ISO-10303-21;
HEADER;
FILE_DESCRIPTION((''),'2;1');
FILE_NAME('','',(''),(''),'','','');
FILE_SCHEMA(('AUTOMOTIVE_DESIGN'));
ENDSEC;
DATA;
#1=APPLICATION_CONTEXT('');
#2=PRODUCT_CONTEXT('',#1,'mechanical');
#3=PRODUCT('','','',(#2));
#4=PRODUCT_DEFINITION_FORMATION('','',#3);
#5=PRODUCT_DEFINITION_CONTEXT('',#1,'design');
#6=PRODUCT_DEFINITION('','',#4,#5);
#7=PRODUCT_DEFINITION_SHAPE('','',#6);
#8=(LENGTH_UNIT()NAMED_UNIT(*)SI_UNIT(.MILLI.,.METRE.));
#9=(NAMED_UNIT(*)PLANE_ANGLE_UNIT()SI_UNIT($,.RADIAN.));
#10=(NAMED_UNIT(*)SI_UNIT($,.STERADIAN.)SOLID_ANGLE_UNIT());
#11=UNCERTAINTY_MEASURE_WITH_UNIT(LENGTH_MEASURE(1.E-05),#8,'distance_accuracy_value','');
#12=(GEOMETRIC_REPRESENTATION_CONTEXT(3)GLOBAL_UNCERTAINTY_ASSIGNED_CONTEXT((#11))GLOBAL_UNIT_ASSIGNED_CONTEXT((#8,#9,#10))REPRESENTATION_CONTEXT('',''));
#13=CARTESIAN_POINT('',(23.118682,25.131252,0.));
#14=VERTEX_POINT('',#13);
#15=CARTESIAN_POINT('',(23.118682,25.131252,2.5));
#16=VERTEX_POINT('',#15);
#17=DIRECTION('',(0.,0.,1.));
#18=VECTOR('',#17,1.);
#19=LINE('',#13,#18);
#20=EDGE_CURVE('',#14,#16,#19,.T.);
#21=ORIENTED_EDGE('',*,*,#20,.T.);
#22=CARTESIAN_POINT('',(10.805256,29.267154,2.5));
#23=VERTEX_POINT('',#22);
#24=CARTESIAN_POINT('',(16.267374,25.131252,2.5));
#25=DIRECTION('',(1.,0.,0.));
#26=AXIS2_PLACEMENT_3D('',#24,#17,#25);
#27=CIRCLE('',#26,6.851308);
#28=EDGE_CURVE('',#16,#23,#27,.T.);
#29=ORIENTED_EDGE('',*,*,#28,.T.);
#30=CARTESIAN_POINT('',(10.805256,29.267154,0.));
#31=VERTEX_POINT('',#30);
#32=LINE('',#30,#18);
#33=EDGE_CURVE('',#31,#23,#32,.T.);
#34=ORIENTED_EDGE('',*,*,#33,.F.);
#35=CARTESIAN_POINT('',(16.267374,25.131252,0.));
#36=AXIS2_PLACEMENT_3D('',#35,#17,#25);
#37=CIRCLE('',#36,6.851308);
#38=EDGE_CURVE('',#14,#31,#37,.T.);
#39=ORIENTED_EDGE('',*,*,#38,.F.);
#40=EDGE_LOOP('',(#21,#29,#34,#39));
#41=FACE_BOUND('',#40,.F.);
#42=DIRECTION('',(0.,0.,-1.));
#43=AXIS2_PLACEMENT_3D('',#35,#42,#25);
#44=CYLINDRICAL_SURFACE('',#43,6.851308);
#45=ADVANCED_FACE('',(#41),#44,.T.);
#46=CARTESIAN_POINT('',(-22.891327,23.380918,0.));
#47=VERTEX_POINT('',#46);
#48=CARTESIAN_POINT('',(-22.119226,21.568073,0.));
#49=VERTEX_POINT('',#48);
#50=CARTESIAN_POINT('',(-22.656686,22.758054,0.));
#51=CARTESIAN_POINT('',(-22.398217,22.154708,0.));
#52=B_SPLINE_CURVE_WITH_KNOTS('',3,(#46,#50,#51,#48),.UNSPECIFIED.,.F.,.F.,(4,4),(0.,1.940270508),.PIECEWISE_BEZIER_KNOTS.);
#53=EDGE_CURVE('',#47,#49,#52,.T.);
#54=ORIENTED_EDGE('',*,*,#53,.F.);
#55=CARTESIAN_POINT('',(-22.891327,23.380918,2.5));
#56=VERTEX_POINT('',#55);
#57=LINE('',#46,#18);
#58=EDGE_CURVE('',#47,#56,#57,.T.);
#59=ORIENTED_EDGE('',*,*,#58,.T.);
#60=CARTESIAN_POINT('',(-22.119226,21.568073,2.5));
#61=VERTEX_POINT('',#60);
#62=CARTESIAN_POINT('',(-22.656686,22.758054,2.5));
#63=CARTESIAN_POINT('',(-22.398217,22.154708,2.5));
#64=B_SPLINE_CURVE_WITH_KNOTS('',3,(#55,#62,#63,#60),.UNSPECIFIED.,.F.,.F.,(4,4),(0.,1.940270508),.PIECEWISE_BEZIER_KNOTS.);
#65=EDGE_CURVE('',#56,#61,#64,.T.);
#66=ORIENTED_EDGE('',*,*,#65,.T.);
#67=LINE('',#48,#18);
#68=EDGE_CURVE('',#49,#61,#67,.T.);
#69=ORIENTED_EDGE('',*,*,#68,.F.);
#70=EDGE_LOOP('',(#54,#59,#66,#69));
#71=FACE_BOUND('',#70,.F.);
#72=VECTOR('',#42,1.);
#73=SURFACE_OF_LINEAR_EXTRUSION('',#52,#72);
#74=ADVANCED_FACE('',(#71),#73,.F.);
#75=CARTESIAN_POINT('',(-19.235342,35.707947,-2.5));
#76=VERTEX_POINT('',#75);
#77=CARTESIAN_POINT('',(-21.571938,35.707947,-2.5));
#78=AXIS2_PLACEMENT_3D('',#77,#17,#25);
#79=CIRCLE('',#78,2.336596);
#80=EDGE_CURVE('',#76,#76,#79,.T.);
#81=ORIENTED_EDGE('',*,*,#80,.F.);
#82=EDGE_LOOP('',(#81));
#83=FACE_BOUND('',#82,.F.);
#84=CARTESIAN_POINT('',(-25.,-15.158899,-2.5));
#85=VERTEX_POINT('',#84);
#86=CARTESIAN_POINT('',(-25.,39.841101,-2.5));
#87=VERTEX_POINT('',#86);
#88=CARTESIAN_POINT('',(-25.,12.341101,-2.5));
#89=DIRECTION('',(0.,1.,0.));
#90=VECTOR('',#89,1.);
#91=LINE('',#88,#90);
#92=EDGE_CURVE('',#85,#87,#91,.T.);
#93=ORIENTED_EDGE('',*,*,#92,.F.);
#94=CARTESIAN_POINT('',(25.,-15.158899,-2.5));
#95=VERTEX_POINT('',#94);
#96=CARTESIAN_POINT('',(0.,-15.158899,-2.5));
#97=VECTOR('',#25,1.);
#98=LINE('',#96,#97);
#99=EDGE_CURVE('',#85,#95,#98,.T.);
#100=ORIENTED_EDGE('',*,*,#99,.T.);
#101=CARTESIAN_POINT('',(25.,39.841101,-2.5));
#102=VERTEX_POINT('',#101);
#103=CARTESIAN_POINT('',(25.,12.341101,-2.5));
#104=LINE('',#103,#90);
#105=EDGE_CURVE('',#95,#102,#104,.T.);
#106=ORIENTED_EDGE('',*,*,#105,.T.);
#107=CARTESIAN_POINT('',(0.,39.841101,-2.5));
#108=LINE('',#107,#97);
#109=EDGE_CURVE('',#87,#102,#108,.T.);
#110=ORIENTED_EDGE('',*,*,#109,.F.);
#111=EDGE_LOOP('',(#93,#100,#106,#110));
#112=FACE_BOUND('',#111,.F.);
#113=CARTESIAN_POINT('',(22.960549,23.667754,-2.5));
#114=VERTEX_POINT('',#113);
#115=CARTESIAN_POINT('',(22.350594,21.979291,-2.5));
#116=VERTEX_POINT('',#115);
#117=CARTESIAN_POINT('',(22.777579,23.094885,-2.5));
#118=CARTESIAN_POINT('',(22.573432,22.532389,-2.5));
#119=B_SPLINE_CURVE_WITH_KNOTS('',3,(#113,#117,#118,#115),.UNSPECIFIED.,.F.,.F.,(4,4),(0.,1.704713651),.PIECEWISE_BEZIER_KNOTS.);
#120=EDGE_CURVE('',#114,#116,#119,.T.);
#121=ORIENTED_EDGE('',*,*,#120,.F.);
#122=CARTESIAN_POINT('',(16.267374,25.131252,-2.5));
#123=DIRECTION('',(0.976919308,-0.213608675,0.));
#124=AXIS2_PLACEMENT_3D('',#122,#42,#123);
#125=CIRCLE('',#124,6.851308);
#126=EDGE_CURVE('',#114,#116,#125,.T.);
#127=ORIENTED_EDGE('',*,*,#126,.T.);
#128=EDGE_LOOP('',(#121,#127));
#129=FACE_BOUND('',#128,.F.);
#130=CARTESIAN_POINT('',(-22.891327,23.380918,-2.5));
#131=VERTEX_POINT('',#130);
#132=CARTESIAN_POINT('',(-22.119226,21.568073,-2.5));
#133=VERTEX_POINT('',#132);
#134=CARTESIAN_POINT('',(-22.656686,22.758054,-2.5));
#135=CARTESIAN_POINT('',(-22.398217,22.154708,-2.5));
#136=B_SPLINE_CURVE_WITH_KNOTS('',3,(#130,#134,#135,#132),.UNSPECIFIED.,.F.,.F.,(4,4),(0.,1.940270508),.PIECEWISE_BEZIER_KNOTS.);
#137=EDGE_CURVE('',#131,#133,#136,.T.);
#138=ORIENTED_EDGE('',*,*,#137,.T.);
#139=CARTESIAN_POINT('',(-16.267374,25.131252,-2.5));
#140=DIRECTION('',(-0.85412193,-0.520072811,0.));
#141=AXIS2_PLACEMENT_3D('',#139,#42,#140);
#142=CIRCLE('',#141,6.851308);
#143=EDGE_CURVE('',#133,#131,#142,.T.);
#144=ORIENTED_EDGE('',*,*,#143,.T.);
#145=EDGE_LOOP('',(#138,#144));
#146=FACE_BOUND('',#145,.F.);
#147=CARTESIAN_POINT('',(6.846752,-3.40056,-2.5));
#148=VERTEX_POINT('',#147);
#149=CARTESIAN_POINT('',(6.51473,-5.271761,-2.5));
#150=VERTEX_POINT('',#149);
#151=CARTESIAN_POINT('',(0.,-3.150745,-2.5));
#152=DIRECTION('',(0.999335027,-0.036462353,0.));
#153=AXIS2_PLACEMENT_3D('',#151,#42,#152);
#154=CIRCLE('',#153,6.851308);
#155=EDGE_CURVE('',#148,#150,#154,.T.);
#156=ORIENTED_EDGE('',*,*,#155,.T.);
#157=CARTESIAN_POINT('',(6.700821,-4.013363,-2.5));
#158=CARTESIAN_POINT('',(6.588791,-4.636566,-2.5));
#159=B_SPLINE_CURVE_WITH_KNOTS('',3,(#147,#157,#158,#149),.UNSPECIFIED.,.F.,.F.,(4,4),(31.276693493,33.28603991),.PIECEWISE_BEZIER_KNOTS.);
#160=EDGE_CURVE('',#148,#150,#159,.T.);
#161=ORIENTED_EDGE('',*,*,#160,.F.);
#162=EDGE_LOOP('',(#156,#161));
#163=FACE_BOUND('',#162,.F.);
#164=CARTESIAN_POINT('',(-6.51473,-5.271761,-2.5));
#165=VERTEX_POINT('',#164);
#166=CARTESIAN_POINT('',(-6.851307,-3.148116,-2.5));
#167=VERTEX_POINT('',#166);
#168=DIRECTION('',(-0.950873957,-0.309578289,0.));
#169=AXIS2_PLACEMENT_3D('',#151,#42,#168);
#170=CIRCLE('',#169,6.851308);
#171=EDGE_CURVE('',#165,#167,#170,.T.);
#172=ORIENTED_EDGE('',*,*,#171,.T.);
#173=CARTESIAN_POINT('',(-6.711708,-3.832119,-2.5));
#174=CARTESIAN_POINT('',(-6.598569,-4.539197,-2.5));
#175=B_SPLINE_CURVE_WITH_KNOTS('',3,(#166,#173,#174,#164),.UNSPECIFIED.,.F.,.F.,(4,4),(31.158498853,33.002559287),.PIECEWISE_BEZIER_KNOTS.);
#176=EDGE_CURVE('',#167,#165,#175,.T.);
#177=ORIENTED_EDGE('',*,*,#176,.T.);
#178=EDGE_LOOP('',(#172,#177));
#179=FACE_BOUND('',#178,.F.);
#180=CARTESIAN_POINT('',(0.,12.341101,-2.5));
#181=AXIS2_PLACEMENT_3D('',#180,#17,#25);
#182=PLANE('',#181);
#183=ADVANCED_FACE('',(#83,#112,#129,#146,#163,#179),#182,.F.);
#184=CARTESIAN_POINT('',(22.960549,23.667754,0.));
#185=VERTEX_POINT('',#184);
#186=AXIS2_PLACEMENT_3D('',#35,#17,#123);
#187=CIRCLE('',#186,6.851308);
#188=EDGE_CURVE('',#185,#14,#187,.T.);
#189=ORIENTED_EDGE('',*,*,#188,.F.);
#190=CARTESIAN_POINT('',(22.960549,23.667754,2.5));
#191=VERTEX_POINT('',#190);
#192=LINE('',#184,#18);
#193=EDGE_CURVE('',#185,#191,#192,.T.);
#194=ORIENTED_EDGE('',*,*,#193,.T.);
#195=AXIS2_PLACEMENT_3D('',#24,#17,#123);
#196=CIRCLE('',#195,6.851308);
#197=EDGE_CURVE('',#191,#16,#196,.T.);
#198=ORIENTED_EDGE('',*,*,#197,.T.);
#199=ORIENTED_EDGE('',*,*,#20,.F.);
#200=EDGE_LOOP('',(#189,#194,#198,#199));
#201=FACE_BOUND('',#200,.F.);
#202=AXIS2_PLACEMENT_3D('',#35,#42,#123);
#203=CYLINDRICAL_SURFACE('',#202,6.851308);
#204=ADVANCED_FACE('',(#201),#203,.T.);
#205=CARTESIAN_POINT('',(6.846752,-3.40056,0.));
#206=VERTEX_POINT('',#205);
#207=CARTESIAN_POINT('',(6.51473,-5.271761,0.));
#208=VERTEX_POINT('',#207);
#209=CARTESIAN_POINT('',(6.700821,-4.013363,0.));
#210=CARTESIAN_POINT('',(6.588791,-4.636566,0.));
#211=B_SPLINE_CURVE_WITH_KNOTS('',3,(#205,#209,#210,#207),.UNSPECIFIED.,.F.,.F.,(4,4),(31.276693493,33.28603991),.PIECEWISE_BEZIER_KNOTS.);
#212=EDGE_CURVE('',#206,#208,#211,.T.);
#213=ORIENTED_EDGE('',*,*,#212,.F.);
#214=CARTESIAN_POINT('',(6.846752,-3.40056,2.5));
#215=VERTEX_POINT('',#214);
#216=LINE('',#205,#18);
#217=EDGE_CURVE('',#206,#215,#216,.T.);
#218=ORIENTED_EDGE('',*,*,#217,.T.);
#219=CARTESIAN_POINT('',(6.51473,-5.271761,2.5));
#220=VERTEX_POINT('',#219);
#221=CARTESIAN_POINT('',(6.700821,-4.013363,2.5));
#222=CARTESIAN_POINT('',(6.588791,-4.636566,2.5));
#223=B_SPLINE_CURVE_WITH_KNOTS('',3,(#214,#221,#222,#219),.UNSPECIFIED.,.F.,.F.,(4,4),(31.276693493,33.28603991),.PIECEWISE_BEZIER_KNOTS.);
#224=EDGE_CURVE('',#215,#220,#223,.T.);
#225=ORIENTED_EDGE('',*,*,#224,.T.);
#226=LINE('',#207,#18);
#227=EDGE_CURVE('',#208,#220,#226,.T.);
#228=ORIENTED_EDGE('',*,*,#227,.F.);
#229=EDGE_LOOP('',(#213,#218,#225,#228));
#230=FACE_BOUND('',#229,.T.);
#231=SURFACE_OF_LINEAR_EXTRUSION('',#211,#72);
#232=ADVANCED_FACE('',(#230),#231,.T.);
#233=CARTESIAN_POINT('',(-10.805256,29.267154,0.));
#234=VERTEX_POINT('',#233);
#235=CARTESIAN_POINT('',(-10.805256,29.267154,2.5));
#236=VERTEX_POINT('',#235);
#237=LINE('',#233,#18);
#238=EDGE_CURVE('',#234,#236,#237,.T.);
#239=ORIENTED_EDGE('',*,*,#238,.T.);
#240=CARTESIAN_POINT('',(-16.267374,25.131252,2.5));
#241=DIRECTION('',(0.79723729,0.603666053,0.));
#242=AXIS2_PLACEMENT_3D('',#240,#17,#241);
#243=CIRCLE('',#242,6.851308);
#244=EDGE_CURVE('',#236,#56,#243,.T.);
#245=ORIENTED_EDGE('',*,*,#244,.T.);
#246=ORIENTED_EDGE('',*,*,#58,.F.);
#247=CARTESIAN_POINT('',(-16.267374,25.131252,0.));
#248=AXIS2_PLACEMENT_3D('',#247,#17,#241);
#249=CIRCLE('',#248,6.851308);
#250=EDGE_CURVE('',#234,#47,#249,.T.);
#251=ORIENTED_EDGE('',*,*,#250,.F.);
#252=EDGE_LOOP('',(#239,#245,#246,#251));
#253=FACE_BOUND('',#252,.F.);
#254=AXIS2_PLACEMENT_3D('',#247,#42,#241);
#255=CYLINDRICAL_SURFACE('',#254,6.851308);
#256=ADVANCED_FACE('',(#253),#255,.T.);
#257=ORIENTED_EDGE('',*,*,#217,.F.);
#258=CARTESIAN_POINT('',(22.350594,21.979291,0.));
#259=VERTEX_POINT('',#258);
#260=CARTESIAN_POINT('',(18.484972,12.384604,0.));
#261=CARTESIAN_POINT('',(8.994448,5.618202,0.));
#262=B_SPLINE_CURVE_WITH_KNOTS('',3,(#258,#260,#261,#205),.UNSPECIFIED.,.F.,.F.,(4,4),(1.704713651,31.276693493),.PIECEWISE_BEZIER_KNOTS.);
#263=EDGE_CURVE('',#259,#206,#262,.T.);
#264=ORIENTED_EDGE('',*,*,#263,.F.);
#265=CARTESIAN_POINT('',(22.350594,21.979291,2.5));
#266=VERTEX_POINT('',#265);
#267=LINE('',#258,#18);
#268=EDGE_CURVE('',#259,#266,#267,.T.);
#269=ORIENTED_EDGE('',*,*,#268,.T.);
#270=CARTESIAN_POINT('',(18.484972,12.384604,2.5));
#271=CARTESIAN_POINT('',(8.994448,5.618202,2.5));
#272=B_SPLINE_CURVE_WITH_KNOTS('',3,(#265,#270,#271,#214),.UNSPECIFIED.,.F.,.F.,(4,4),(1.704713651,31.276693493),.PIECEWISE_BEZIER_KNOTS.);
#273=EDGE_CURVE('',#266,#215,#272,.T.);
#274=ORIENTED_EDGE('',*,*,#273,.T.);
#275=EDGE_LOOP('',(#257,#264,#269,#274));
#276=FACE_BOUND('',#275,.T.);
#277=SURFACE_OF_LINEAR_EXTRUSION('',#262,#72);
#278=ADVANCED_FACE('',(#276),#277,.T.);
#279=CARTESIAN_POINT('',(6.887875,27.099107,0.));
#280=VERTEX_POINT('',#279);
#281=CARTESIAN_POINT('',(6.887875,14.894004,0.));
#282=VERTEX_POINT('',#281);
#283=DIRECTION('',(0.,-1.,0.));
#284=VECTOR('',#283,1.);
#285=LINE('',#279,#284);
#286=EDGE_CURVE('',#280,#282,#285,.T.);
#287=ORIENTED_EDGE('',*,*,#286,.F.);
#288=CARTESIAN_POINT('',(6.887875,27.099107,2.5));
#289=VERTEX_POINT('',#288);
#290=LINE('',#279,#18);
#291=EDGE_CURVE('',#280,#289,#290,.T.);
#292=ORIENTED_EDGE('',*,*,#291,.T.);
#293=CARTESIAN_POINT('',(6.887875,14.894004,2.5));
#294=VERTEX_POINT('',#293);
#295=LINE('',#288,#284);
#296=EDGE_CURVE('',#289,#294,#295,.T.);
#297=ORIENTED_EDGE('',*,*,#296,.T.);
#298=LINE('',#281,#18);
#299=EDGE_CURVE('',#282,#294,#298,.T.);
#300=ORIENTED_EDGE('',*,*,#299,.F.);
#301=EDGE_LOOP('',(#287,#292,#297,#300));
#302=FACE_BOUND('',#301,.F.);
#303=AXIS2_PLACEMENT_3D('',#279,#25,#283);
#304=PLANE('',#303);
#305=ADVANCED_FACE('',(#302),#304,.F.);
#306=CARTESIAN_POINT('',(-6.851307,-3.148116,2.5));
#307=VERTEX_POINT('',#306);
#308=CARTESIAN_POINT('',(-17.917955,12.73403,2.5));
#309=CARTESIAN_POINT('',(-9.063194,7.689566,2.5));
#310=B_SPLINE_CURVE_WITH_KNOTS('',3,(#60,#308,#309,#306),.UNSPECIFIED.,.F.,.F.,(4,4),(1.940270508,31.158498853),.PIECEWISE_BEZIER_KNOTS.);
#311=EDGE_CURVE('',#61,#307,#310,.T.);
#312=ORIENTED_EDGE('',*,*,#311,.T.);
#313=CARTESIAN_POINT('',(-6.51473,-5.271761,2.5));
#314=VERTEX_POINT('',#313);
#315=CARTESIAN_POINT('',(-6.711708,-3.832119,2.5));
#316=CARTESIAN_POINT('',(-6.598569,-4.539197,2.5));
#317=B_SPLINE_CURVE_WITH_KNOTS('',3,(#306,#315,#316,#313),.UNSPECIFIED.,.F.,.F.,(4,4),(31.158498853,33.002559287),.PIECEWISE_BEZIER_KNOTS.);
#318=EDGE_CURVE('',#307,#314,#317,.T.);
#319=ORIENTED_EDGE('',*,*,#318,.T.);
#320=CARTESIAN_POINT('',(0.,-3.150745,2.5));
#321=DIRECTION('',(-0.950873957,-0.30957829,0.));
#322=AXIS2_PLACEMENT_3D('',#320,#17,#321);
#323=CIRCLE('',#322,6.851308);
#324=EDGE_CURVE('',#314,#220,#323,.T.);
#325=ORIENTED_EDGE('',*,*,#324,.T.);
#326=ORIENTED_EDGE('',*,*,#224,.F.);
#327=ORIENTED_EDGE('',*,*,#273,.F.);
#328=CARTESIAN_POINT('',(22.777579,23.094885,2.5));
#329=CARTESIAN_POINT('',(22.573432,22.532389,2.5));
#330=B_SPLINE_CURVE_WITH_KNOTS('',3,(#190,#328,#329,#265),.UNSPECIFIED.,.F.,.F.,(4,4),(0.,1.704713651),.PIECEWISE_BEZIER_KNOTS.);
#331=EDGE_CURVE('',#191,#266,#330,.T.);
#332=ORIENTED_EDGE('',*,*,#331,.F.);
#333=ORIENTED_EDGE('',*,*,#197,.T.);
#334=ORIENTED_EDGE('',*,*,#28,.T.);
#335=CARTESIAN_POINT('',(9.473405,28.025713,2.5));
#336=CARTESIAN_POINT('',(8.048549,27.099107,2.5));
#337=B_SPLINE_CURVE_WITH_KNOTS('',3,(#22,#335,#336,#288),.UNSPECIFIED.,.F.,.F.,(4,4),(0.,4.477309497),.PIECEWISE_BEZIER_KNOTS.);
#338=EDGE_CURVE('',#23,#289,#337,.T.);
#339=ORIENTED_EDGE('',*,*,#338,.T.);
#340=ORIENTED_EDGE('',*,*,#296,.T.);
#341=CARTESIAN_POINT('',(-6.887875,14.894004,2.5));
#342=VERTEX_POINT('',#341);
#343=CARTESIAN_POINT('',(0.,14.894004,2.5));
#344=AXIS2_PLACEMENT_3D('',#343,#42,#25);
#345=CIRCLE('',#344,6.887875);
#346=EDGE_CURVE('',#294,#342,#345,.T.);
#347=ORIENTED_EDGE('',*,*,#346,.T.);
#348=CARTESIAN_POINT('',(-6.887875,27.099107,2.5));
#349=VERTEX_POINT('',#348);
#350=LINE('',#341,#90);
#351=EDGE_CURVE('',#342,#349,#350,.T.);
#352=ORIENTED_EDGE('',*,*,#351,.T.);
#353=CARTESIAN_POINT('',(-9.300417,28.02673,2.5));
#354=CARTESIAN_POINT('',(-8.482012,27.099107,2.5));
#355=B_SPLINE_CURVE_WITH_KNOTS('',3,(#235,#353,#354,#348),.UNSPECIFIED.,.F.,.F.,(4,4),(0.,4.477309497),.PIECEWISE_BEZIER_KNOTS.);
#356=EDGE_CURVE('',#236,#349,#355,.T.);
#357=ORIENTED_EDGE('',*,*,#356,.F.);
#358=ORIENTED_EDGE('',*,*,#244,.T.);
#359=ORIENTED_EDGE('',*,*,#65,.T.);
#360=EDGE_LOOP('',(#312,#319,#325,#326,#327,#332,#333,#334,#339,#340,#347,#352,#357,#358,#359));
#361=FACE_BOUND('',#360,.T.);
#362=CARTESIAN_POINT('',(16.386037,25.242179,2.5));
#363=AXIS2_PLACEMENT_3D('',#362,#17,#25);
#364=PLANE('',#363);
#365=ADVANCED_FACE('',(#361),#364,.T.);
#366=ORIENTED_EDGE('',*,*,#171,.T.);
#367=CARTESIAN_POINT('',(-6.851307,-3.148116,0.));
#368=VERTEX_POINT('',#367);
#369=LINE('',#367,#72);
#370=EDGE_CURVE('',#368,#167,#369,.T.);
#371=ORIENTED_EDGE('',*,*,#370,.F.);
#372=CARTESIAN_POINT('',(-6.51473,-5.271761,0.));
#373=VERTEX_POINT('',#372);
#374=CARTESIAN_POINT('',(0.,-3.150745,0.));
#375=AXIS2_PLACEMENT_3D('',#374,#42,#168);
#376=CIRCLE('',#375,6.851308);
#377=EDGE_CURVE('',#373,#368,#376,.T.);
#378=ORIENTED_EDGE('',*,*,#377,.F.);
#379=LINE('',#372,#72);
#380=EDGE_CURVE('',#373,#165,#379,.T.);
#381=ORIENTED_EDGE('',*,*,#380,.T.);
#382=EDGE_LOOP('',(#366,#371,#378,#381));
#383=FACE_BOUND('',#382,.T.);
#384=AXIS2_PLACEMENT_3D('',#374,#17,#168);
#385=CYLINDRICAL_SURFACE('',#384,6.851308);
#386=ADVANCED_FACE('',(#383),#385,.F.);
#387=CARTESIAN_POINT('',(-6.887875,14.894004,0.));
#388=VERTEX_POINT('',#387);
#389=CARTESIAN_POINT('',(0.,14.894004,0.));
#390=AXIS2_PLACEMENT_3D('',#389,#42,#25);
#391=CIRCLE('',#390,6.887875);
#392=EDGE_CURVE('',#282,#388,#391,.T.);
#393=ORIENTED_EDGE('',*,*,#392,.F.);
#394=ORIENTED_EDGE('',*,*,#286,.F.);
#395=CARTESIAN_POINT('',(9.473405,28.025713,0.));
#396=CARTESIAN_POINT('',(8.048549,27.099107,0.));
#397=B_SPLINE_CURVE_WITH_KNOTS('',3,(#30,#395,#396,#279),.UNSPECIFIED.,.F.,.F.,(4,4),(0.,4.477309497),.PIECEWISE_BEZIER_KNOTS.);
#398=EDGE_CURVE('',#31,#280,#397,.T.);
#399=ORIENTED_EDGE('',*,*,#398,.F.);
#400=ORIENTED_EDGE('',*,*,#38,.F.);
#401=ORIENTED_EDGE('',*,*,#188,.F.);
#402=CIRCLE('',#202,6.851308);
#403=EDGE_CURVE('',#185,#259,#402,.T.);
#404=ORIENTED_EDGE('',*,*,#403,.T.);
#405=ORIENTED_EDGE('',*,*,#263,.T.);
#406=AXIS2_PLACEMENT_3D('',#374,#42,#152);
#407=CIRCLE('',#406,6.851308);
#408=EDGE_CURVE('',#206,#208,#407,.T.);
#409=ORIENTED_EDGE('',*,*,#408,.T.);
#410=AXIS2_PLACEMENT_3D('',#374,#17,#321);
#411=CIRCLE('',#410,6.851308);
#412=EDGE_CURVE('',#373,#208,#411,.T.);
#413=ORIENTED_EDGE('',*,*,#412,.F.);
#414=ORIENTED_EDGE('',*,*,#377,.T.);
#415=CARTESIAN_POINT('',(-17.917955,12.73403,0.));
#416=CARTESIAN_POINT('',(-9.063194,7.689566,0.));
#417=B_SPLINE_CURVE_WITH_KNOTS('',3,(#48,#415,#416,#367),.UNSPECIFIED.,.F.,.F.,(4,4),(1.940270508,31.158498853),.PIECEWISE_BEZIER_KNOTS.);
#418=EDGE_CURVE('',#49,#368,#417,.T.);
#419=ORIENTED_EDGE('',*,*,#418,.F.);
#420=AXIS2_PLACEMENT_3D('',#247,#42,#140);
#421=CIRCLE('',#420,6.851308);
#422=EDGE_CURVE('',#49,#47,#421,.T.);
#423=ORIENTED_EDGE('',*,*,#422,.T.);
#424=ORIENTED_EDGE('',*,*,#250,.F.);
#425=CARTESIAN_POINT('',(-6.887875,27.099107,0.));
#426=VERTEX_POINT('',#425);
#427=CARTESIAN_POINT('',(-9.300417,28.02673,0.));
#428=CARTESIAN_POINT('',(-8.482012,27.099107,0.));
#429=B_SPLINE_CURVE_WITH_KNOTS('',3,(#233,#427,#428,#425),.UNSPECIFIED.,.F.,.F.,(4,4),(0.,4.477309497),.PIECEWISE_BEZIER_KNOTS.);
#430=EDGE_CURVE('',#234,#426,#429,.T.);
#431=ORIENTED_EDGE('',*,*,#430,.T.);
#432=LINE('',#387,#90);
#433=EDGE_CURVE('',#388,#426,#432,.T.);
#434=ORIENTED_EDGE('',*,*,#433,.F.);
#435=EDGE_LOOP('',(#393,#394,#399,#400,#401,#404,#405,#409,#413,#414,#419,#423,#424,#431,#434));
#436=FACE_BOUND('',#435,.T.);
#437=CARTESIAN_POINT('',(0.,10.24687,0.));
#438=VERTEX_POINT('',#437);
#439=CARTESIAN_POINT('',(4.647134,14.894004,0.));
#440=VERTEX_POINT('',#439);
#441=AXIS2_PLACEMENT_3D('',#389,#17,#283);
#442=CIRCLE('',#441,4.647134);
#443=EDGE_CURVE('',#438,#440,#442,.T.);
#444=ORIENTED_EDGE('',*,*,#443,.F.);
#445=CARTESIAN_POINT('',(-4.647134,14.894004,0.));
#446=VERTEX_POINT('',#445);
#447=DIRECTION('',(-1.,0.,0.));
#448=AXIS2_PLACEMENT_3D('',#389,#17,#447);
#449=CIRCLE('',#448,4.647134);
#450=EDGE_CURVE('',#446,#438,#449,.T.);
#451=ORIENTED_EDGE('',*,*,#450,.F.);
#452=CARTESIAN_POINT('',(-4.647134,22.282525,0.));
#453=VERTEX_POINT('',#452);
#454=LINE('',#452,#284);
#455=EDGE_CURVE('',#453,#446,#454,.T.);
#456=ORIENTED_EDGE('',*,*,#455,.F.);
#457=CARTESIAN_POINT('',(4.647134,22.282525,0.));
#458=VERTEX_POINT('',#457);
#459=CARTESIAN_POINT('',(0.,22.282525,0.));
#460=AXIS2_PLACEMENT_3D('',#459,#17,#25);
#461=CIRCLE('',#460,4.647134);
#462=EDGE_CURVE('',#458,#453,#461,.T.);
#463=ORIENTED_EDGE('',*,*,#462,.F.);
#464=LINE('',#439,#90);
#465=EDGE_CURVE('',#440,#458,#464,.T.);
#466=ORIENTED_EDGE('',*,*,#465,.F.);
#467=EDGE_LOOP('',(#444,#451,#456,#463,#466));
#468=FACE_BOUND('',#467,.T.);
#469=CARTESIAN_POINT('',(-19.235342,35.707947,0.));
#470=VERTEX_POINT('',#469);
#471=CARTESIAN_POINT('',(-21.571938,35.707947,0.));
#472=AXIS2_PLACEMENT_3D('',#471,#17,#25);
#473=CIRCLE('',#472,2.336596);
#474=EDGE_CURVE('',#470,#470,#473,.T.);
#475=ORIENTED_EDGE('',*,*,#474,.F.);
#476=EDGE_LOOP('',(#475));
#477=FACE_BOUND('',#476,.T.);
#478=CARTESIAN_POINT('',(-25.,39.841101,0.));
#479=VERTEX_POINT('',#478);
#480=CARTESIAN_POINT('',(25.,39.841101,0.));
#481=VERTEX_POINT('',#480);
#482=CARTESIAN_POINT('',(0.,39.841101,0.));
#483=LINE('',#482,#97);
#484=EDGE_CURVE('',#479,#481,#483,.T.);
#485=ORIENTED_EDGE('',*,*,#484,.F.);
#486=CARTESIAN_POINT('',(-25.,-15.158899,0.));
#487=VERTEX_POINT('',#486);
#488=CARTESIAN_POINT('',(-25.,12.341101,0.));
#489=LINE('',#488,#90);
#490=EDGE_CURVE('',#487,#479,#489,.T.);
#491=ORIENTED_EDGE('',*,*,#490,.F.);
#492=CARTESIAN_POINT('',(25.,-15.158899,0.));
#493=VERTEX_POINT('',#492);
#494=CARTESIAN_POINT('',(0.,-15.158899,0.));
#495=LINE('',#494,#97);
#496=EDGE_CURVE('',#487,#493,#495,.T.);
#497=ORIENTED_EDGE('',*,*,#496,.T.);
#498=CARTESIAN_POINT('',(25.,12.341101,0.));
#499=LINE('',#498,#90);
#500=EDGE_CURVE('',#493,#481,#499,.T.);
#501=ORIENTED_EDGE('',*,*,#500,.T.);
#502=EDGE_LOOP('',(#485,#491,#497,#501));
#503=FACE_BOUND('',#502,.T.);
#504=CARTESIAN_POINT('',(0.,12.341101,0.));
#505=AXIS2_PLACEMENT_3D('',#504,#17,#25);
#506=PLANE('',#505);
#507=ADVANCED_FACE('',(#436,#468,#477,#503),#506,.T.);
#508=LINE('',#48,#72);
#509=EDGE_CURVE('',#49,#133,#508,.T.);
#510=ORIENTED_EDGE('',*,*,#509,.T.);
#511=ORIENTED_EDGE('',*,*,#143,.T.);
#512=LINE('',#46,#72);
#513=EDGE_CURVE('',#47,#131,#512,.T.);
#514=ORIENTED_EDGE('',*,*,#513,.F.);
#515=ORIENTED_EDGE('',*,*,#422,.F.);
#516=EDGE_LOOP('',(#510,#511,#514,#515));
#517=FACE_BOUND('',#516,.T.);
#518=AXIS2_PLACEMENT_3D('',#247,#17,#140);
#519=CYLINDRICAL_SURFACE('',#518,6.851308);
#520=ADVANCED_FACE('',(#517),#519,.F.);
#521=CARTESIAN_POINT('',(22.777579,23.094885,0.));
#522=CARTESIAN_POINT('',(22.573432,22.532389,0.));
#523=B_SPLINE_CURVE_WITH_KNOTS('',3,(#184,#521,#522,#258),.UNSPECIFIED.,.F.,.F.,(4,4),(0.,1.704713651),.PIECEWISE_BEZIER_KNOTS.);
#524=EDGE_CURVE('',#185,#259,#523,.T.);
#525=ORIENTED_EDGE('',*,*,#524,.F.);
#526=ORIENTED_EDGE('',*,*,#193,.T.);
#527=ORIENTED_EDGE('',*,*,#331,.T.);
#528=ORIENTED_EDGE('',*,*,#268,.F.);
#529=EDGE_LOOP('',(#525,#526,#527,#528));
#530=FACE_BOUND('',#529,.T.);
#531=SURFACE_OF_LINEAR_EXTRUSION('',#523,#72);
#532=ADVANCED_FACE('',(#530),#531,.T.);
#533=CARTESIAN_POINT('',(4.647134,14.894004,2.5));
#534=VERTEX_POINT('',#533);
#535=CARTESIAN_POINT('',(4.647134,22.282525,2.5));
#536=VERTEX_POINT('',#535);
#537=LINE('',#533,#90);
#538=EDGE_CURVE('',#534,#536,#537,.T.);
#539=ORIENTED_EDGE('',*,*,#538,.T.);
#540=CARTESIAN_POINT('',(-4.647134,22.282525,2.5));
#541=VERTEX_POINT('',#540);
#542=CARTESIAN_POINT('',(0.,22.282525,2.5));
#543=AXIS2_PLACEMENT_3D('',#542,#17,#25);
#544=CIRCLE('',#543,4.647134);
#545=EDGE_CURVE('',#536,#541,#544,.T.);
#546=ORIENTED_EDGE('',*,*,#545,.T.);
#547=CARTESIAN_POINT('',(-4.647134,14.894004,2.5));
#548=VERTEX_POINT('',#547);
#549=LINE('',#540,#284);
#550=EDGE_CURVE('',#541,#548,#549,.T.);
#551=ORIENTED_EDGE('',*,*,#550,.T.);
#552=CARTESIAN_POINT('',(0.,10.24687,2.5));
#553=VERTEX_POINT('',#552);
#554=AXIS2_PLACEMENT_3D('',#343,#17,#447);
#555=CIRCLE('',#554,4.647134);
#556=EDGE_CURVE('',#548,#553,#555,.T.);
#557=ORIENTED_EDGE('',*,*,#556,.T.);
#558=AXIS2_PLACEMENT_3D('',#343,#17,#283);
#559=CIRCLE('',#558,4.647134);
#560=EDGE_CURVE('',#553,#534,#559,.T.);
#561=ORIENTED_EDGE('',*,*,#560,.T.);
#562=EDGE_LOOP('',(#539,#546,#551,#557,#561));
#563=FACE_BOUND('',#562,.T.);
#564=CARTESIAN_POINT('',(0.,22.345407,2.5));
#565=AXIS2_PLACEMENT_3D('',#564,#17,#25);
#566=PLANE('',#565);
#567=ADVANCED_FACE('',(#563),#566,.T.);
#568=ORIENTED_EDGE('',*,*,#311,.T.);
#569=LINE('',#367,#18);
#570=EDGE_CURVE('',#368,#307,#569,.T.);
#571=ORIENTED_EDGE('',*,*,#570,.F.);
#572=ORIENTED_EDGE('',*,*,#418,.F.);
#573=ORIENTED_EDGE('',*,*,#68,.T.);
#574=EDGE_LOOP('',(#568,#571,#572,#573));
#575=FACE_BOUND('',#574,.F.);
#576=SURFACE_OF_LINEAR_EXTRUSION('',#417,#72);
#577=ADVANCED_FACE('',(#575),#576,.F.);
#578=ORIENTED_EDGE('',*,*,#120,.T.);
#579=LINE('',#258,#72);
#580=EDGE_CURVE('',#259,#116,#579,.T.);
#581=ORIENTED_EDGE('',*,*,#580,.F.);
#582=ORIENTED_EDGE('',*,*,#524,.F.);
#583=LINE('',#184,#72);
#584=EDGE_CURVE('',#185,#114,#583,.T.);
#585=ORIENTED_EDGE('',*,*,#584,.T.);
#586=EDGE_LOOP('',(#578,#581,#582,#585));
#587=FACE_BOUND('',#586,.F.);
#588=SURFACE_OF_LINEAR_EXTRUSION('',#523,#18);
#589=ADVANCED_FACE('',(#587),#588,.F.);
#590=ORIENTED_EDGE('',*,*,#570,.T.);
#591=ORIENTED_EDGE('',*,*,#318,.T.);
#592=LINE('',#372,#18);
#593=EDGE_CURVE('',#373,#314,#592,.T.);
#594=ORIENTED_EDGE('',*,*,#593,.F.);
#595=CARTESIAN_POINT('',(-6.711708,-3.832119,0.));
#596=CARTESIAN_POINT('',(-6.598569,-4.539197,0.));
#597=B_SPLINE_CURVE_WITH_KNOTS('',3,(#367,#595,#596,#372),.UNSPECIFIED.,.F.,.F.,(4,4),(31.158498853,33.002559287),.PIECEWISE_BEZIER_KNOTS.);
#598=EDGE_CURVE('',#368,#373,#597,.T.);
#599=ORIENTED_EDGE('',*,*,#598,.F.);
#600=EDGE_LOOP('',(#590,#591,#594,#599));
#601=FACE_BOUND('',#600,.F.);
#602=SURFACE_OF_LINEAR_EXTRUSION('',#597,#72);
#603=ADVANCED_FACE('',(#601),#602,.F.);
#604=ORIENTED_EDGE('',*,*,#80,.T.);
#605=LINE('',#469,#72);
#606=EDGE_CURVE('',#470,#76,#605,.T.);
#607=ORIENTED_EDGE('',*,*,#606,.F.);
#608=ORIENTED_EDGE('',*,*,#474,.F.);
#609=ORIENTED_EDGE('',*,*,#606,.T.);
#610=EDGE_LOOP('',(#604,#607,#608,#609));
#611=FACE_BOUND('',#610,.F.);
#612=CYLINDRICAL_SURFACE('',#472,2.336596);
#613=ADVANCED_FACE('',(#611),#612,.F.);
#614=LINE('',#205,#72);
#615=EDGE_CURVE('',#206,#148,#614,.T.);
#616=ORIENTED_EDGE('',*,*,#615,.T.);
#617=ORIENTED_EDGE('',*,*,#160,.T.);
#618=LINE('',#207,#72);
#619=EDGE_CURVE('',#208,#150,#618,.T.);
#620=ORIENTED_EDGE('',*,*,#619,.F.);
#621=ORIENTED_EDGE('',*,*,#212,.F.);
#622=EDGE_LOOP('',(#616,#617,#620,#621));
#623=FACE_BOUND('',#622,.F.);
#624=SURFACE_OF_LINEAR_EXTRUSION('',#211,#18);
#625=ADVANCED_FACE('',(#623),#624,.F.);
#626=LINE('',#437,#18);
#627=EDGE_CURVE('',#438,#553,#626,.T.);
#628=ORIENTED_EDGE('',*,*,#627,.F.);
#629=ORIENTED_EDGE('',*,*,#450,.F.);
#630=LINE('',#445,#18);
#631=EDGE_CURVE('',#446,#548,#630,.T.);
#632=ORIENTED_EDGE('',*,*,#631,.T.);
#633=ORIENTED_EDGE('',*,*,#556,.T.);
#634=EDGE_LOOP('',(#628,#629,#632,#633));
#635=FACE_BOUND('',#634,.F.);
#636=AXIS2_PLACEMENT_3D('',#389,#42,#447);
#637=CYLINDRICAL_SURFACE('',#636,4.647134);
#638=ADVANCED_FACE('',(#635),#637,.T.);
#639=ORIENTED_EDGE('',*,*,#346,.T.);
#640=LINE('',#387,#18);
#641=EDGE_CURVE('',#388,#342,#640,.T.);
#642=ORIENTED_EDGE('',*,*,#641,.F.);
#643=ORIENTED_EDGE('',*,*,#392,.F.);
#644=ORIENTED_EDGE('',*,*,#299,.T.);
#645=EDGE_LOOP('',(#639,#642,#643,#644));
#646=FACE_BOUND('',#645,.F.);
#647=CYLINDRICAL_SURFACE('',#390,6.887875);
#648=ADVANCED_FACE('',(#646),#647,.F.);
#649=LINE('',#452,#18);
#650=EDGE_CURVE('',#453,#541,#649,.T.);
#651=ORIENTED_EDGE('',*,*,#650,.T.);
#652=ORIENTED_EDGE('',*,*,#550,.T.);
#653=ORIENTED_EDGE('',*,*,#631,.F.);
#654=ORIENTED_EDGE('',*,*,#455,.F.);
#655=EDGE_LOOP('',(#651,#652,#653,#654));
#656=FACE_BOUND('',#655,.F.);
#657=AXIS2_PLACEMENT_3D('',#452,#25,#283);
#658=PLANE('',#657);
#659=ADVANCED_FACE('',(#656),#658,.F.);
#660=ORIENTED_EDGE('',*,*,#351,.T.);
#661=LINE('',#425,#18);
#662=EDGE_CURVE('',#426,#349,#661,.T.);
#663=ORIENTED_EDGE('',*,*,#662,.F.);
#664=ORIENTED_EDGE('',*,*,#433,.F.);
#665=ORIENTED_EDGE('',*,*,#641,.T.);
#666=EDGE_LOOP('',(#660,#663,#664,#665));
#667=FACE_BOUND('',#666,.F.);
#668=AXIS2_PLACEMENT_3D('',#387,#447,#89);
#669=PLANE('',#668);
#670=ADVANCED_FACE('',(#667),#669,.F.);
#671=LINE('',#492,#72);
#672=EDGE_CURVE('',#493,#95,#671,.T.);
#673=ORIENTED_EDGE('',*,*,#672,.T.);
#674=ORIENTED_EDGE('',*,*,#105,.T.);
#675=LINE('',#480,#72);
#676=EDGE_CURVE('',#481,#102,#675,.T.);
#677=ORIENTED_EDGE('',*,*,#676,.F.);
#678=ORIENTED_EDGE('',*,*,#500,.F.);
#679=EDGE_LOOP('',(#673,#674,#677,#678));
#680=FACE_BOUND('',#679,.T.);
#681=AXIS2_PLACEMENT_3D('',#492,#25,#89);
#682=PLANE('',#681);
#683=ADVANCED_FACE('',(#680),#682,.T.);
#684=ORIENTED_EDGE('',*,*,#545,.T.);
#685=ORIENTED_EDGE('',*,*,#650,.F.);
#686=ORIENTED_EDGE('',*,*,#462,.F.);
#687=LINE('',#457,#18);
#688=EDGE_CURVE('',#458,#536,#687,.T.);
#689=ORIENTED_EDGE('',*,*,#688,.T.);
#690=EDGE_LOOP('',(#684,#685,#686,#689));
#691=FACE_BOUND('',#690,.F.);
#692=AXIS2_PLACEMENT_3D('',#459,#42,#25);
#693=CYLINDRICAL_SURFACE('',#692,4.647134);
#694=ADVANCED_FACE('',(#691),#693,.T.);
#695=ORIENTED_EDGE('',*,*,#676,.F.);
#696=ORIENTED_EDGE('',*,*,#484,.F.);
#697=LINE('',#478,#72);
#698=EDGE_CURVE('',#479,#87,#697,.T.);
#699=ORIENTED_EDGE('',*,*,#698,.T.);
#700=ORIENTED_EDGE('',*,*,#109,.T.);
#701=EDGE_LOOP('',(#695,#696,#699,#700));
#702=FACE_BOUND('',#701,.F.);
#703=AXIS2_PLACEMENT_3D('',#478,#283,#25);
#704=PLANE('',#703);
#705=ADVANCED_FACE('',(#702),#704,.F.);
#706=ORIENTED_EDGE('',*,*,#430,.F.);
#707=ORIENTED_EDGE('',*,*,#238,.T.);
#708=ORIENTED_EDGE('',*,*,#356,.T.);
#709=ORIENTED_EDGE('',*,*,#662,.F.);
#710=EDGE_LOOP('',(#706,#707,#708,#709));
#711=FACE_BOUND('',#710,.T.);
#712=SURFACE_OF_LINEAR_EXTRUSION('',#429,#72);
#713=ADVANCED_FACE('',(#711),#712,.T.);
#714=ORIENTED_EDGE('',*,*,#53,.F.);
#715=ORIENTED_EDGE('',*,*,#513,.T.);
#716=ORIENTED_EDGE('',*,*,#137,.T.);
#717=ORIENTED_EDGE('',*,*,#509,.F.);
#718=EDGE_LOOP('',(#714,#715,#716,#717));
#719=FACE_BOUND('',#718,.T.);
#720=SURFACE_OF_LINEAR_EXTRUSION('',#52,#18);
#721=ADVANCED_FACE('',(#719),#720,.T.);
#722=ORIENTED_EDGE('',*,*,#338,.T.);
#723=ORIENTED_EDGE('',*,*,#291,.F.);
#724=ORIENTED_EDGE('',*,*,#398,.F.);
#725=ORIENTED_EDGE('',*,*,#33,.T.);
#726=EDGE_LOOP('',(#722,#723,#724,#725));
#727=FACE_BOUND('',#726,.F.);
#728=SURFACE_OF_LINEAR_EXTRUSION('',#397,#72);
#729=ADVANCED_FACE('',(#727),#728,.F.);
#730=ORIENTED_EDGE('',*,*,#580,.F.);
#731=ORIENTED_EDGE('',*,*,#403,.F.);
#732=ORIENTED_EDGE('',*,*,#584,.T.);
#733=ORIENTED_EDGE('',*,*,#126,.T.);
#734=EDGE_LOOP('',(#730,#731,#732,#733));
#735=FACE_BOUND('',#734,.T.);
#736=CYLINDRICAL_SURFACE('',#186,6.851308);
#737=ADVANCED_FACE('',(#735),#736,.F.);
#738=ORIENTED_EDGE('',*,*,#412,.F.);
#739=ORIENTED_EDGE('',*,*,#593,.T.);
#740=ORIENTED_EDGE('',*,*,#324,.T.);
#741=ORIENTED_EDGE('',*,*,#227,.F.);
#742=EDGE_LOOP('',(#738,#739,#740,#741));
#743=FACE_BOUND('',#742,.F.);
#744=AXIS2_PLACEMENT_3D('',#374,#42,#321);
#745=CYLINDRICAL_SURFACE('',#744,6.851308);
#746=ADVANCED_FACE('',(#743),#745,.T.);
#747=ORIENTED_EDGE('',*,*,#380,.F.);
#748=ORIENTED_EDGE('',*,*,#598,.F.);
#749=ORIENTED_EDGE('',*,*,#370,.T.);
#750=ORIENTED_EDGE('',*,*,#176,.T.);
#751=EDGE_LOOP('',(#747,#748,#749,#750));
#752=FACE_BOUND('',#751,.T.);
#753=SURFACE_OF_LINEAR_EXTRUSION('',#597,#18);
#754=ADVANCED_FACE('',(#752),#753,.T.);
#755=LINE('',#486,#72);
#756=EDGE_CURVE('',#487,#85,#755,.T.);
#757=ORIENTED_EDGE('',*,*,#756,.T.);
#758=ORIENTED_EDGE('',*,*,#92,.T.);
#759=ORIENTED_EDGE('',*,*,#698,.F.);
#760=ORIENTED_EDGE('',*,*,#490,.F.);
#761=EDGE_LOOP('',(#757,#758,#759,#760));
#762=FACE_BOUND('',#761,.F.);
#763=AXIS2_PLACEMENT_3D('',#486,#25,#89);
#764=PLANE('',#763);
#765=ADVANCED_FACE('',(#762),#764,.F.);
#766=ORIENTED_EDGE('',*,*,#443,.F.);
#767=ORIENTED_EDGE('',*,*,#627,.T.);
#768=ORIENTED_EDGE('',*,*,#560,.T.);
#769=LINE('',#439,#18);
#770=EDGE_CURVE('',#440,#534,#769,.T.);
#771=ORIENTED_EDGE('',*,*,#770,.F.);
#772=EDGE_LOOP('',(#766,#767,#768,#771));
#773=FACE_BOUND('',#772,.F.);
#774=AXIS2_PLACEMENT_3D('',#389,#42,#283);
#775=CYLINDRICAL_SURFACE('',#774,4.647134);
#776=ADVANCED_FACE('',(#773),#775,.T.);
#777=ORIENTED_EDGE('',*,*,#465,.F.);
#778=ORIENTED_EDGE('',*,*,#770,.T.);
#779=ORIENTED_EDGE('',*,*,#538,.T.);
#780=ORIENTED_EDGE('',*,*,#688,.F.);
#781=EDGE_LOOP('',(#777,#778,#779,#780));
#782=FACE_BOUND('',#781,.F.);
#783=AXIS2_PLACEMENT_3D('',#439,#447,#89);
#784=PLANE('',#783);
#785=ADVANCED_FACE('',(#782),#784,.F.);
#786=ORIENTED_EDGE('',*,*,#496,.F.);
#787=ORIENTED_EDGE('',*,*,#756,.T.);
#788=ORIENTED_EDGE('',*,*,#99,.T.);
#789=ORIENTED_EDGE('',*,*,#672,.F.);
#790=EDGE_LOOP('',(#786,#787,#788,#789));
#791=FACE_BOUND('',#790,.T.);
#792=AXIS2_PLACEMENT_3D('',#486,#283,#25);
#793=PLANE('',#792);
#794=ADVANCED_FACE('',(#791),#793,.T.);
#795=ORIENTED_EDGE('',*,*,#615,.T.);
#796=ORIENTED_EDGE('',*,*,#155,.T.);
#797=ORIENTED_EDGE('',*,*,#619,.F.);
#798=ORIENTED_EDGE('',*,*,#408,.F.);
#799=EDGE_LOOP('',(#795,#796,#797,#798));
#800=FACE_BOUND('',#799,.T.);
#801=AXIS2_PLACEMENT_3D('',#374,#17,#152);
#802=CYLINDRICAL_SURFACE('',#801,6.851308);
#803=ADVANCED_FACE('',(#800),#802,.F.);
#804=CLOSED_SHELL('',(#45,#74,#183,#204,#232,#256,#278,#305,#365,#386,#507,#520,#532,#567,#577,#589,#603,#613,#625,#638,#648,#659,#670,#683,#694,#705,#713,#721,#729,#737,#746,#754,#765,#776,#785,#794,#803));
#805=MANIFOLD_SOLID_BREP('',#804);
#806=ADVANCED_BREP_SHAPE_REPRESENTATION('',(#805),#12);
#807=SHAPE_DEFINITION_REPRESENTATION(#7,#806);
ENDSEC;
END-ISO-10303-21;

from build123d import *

# Parameters (mm, degrees)
F0_W     = 50
F0_H     = 55
F0_R     = 2.3365962568
F1_DEPTH = 2.5
F2_DEPTH = 2.5


with BuildPart() as f1:
    # F0 (on Top) → F1 (new body)
    with BuildSketch(Plane.XY):
        with Locations((0, 12.341101347)):
            Rectangle(F0_W, F0_H)
        with BuildLine():
            ThreePointArc((10.8052556607, 29.2671544041), (18.4488604009, 31.6259838811), (23.1186818497, 25.1312523575))
            ThreePointArc((23.1186818497, 25.1312523575), (23.0790338974, 24.3952437271), (22.9605489193, 23.6677535387))
            ThreePointArc((22.9605489193, 23.6677535387), (22.7111144002, 22.8034574753), (22.3505935824, 21.9792912273))
            add(Edge.make_bspline(
                [(22.3505935824, 21.9792912273), (18.484972418, 12.3846041121), (8.9944482287, 5.6182022343), (6.8467520485, -3.4005596444)],
                knots=[1.7047136512, 1.7047136512, 1.7047136512, 1.7047136512, 31.2766934929, 31.2766934929, 31.2766934929, 31.2766934929], degree=3))
            ThreePointArc((6.8467520485, -3.4005596444), (6.7459359262, -4.3477283467), (6.5147303328, -5.271761038))
            ThreePointArc((6.5147303328, -5.271761038), (0, -10.0020528135), (-6.5147303328, -5.271761038))
            ThreePointArc((-6.5147303328, -5.271761038), (-6.7668462793, -4.2232244294), (-6.851307477, -3.1481161668))
            add(Edge.make_bspline(
                [(-22.1192262656, 21.568073359), (-17.9179549259, 12.7340303131), (-9.0631935188, 7.6895660109), (-6.851307477, -3.1481161668)],
                knots=[1.9402705078, 1.9402705078, 1.9402705078, 1.9402705078, 31.1584988533, 31.1584988533, 31.1584988533, 31.1584988533], degree=3))
            ThreePointArc((-22.1192262656, 21.568073359), (-22.57078803, 22.4465939133), (-22.8913266517, 23.3809179381))
            ThreePointArc((-22.8913266517, 23.3809179381), (-19.2672755049, 31.2908798808), (-10.8052556607, 29.2671544041))
            add(Edge.make_bspline(
                [(-10.8052556607, 29.2671544041), (-9.3004167648, 28.0267296842), (-8.4820119868, 27.09910709), (-6.8878750083, 27.09910709)],
                knots=[0, 0, 0, 0, 4.4773094971, 4.4773094971, 4.4773094971, 4.4773094971], degree=3))
            Line((-6.8878750083, 27.09910709), (-6.8878750083, 14.8940041956))
            ThreePointArc((-6.8878750083, 14.8940041956), (0, 8.0061291873), (6.8878750083, 14.8940041956))
            Line((6.8878750083, 14.8940041956), (6.8878750083, 27.09910709))
            add(Edge.make_bspline(
                [(10.8052556607, 29.2671544041), (9.4734053303, 28.0257134136), (8.0485488803, 27.09910709), (6.8878750083, 27.09910709)],
                knots=[0, 0, 0, 0, 4.4773094971, 4.4773094971, 4.4773094971, 4.4773094971], degree=3))
        make_face(mode=Mode.SUBTRACT)
        with Locations((-21.5719379485, 35.7079468668)):
            Circle(F0_R, mode=Mode.SUBTRACT)
        with BuildLine():
            ThreePointArc((-4.6471344177, 22.2825248368), (0, 26.9296592545), (4.6471344177, 22.2825248368))
            Line((4.6471344177, 22.2825248368), (4.6471344177, 14.8940041956))
            ThreePointArc((4.6471344177, 14.8940041956), (3.2860202598, 11.6079839357), (0, 10.2468697779))
            ThreePointArc((0, 10.2468697779), (-3.2860202598, 11.6079839357), (-4.6471344177, 14.8940041956))
            Line((-4.6471344177, 14.8940041956), (-4.6471344177, 22.2825248368))
        make_face(mode=Mode.SUBTRACT)
        with BuildLine():
            ThreePointArc((22.3505935824, 21.9792912273), (12.6102330192, 19.3376574577), (10.8052556607, 29.2671544041))
            add(Edge.make_bspline(
                [(10.8052556607, 29.2671544041), (9.4734053303, 28.0257134136), (8.0485488803, 27.09910709), (6.8878750083, 27.09910709)],
                knots=[0, 0, 0, 0, 4.4773094971, 4.4773094971, 4.4773094971, 4.4773094971], degree=3))
            Line((6.8878750083, 27.09910709), (6.8878750083, 14.8940041956))
            ThreePointArc((6.8878750083, 14.8940041956), (0, 8.0061291873), (-6.8878750083, 14.8940041956))
            Line((-6.8878750083, 14.8940041956), (-6.8878750083, 27.09910709))
            add(Edge.make_bspline(
                [(-10.8052556607, 29.2671544041), (-9.3004167648, 28.0267296842), (-8.4820119868, 27.09910709), (-6.8878750083, 27.09910709)],
                knots=[0, 0, 0, 0, 4.4773094971, 4.4773094971, 4.4773094971, 4.4773094971], degree=3))
            ThreePointArc((-10.8052556607, 29.2671544041), (-9.7726423449, 27.31273889), (-9.4160658872, 25.1312523575))
            ThreePointArc((-9.4160658872, 25.1312523575), (-14.4170255201, 18.5345386269), (-22.1192262656, 21.568073359))
            add(Edge.make_bspline(
                [(-22.1192262656, 21.568073359), (-17.9179549259, 12.7340303131), (-9.0631935188, 7.6895660109), (-6.851307477, -3.1481161668)],
                knots=[1.9402705078, 1.9402705078, 1.9402705078, 1.9402705078, 31.1584988533, 31.1584988533, 31.1584988533, 31.1584988533], degree=3))
            ThreePointArc((-6.851307477, -3.1481161668), (0.0013143327, 3.700563023), (6.8513079813, -3.1507448322))
            ThreePointArc((6.8513079813, -3.1507448322), (6.8501689034, -3.2756730085), (6.8467520485, -3.4005596444))
            add(Edge.make_bspline(
                [(22.3505935824, 21.9792912273), (18.484972418, 12.3846041121), (8.9944482287, 5.6182022343), (6.8467520485, -3.4005596444)],
                knots=[1.7047136512, 1.7047136512, 1.7047136512, 1.7047136512, 31.2766934929, 31.2766934929, 31.2766934929, 31.2766934929], degree=3))
        make_face()
        with BuildLine():
            ThreePointArc((22.9605489193, 23.6677535387), (23.0790338974, 24.3952437271), (23.1186818497, 25.1312523575))
            ThreePointArc((23.1186818497, 25.1312523575), (18.4488604009, 31.6259838811), (10.8052556607, 29.2671544041))
            ThreePointArc((10.8052556607, 29.2671544041), (12.6102330192, 19.3376574577), (22.3505935824, 21.9792912273))
            add(Edge.make_bspline(
                [(22.9605489193, 23.6677535387), (22.7775786287, 23.0948852778), (22.5734321344, 22.5323889297), (22.3505935824, 21.9792912273)],
                knots=[0, 0, 0, 0, 1.7047136512, 1.7047136512, 1.7047136512, 1.7047136512], degree=3))
        make_face()
        with BuildLine():
            add(Edge.make_bspline(
                [(-22.8913266517, 23.3809179381), (-22.6566860437, 22.7580544126), (-22.3982165856, 22.1547082838), (-22.1192262656, 21.568073359)],
                knots=[0, 0, 0, 0, 1.9402705078, 1.9402705078, 1.9402705078, 1.9402705078], degree=3))
            ThreePointArc((-22.1192262656, 21.568073359), (-14.4170255201, 18.5345386269), (-9.4160658872, 25.1312523575))
            ThreePointArc((-9.4160658872, 25.1312523575), (-9.7726423449, 27.31273889), (-10.8052556607, 29.2671544041))
            ThreePointArc((-10.8052556607, 29.2671544041), (-19.2672755049, 31.2908798808), (-22.8913266517, 23.3809179381))
        make_face()
        with BuildLine():
            add(Edge.make_bspline(
                [(6.8467520485, -3.4005596444), (6.7008211488, -4.0133632838), (6.5887912239, -4.6365658048), (6.5147303328, -5.271761038)],
                knots=[31.2766934929, 31.2766934929, 31.2766934929, 31.2766934929, 33.2860399103, 33.2860399103, 33.2860399103, 33.2860399103], degree=3))
            ThreePointArc((6.8467520485, -3.4005596444), (6.8501689034, -3.2756730085), (6.8513079813, -3.1507448322))
            ThreePointArc((6.8513079813, -3.1507448322), (0.0013143327, 3.700563023), (-6.851307477, -3.1481161668))
            add(Edge.make_bspline(
                [(-6.851307477, -3.1481161668), (-6.7117079268, -3.8321186553), (-6.5985689132, -4.5391972434), (-6.5147303328, -5.271761038)],
                knots=[31.1584988533, 31.1584988533, 31.1584988533, 31.1584988533, 33.0025592871, 33.0025592871, 33.0025592871, 33.0025592871], degree=3))
            ThreePointArc((-6.5147303328, -5.271761038), (0, -10.0020528135), (6.5147303328, -5.271761038))
        make_face()
        with BuildLine():
            ThreePointArc((2.819272775, 18.5882645162), (4.1651769375, 20.2216610918), (4.6471344177, 22.2825248368))
            ThreePointArc((4.6471344177, 22.2825248368), (0, 26.9296592545), (-4.6471344177, 22.2825248368))
            ThreePointArc((-4.6471344177, 22.2825248368), (-4.1651769375, 20.2216610918), (-2.819272775, 18.5882645162))
            ThreePointArc((-2.819272775, 18.5882645162), (0, 19.5411386133), (2.819272775, 18.5882645162))
        make_face()
        with BuildLine():
            ThreePointArc((4.6471344177, 14.8940041956), (4.1651769375, 16.9548679405), (2.819272775, 18.5882645162))
            ThreePointArc((2.819272775, 18.5882645162), (1.4879741282, 17.8800492502), (0, 17.6353904191))
            Line((0, 17.6353904191), (0, 10.2468697779))
            ThreePointArc((0, 10.2468697779), (3.2860202598, 11.6079839357), (4.6471344177, 14.8940041956))
        make_face()
        with BuildLine():
            ThreePointArc((0, 17.6353904191), (-1.4879741282, 17.8800492502), (-2.819272775, 18.5882645162))
            ThreePointArc((-2.819272775, 18.5882645162), (-4.1651769375, 16.9548679405), (-4.6471344177, 14.8940041956))
            ThreePointArc((-4.6471344177, 14.8940041956), (-3.2860202598, 11.6079839357), (0, 10.2468697779))
            Line((0, 10.2468697779), (0, 17.6353904191))
        make_face()
        with BuildLine():
            ThreePointArc((0, 17.6353904191), (1.4879741282, 17.8800492502), (2.819272775, 18.5882645162))
            ThreePointArc((2.819272775, 18.5882645162), (0, 19.5411386133), (-2.819272775, 18.5882645162))
            ThreePointArc((-2.819272775, 18.5882645162), (-1.4879741282, 17.8800492502), (0, 17.6353904191))
        make_face()
        with BuildLine():
            Line((4.6471344177, 14.8940041956), (4.6471344177, 22.2825248368))
            ThreePointArc((4.6471344177, 22.2825248368), (4.1651769375, 20.2216610918), (2.819272775, 18.5882645162))
            ThreePointArc((2.819272775, 18.5882645162), (4.1651769375, 16.9548679405), (4.6471344177, 14.8940041956))
        make_face()
        with BuildLine():
            ThreePointArc((-2.819272775, 18.5882645162), (-4.1651769375, 20.2216610918), (-4.6471344177, 22.2825248368))
            Line((-4.6471344177, 22.2825248368), (-4.6471344177, 14.8940041956))
            ThreePointArc((-4.6471344177, 14.8940041956), (-4.1651769375, 16.9548679405), (-2.819272775, 18.5882645162))
        make_face()
    extrude(amount=-F1_DEPTH)

    # F0 (on Top) → F2 (join)
    with BuildSketch(Plane.XY):
        with BuildLine():
            ThreePointArc((2.819272775, 18.5882645162), (4.1651769375, 20.2216610918), (4.6471344177, 22.2825248368))
            ThreePointArc((4.6471344177, 22.2825248368), (0, 26.9296592545), (-4.6471344177, 22.2825248368))
            ThreePointArc((-4.6471344177, 22.2825248368), (-4.1651769375, 20.2216610918), (-2.819272775, 18.5882645162))
            ThreePointArc((-2.819272775, 18.5882645162), (0, 19.5411386133), (2.819272775, 18.5882645162))
        make_face()
        with BuildLine():
            Line((4.6471344177, 14.8940041956), (4.6471344177, 22.2825248368))
            ThreePointArc((4.6471344177, 22.2825248368), (4.1651769375, 20.2216610918), (2.819272775, 18.5882645162))
            ThreePointArc((2.819272775, 18.5882645162), (4.1651769375, 16.9548679405), (4.6471344177, 14.8940041956))
        make_face()
        with BuildLine():
            ThreePointArc((-2.819272775, 18.5882645162), (-4.1651769375, 20.2216610918), (-4.6471344177, 22.2825248368))
            Line((-4.6471344177, 22.2825248368), (-4.6471344177, 14.8940041956))
            ThreePointArc((-4.6471344177, 14.8940041956), (-4.1651769375, 16.9548679405), (-2.819272775, 18.5882645162))
        make_face()
        with BuildLine():
            ThreePointArc((4.6471344177, 14.8940041956), (4.1651769375, 16.9548679405), (2.819272775, 18.5882645162))
            ThreePointArc((2.819272775, 18.5882645162), (1.4879741282, 17.8800492502), (0, 17.6353904191))
            Line((0, 17.6353904191), (0, 10.2468697779))
            ThreePointArc((0, 10.2468697779), (3.2860202598, 11.6079839357), (4.6471344177, 14.8940041956))
        make_face()
        with BuildLine():
            ThreePointArc((0, 17.6353904191), (1.4879741282, 17.8800492502), (2.819272775, 18.5882645162))
            ThreePointArc((2.819272775, 18.5882645162), (0, 19.5411386133), (-2.819272775, 18.5882645162))
            ThreePointArc((-2.819272775, 18.5882645162), (-1.4879741282, 17.8800492502), (0, 17.6353904191))
        make_face()
        with BuildLine():
            ThreePointArc((0, 17.6353904191), (-1.4879741282, 17.8800492502), (-2.819272775, 18.5882645162))
            ThreePointArc((-2.819272775, 18.5882645162), (-4.1651769375, 16.9548679405), (-4.6471344177, 14.8940041956))
            ThreePointArc((-4.6471344177, 14.8940041956), (-3.2860202598, 11.6079839357), (0, 10.2468697779))
            Line((0, 10.2468697779), (0, 17.6353904191))
        make_face()
        with BuildLine():
            ThreePointArc((22.9605489193, 23.6677535387), (23.0790338974, 24.3952437271), (23.1186818497, 25.1312523575))
            ThreePointArc((23.1186818497, 25.1312523575), (18.4488604009, 31.6259838811), (10.8052556607, 29.2671544041))
            ThreePointArc((10.8052556607, 29.2671544041), (12.6102330192, 19.3376574577), (22.3505935824, 21.9792912273))
            add(Edge.make_bspline(
                [(22.9605489193, 23.6677535387), (22.7775786287, 23.0948852778), (22.5734321344, 22.5323889297), (22.3505935824, 21.9792912273)],
                knots=[0, 0, 0, 0, 1.7047136512, 1.7047136512, 1.7047136512, 1.7047136512], degree=3))
        make_face()
        with BuildLine():
            ThreePointArc((22.3505935824, 21.9792912273), (12.6102330192, 19.3376574577), (10.8052556607, 29.2671544041))
            add(Edge.make_bspline(
                [(10.8052556607, 29.2671544041), (9.4734053303, 28.0257134136), (8.0485488803, 27.09910709), (6.8878750083, 27.09910709)],
                knots=[0, 0, 0, 0, 4.4773094971, 4.4773094971, 4.4773094971, 4.4773094971], degree=3))
            Line((6.8878750083, 27.09910709), (6.8878750083, 14.8940041956))
            ThreePointArc((6.8878750083, 14.8940041956), (0, 8.0061291873), (-6.8878750083, 14.8940041956))
            Line((-6.8878750083, 14.8940041956), (-6.8878750083, 27.09910709))
            add(Edge.make_bspline(
                [(-10.8052556607, 29.2671544041), (-9.3004167648, 28.0267296842), (-8.4820119868, 27.09910709), (-6.8878750083, 27.09910709)],
                knots=[0, 0, 0, 0, 4.4773094971, 4.4773094971, 4.4773094971, 4.4773094971], degree=3))
            ThreePointArc((-10.8052556607, 29.2671544041), (-9.7726423449, 27.31273889), (-9.4160658872, 25.1312523575))
            ThreePointArc((-9.4160658872, 25.1312523575), (-14.4170255201, 18.5345386269), (-22.1192262656, 21.568073359))
            add(Edge.make_bspline(
                [(-22.1192262656, 21.568073359), (-17.9179549259, 12.7340303131), (-9.0631935188, 7.6895660109), (-6.851307477, -3.1481161668)],
                knots=[1.9402705078, 1.9402705078, 1.9402705078, 1.9402705078, 31.1584988533, 31.1584988533, 31.1584988533, 31.1584988533], degree=3))
            ThreePointArc((-6.851307477, -3.1481161668), (0.0013143327, 3.700563023), (6.8513079813, -3.1507448322))
            ThreePointArc((6.8513079813, -3.1507448322), (6.8501689034, -3.2756730085), (6.8467520485, -3.4005596444))
            add(Edge.make_bspline(
                [(22.3505935824, 21.9792912273), (18.484972418, 12.3846041121), (8.9944482287, 5.6182022343), (6.8467520485, -3.4005596444)],
                knots=[1.7047136512, 1.7047136512, 1.7047136512, 1.7047136512, 31.2766934929, 31.2766934929, 31.2766934929, 31.2766934929], degree=3))
        make_face()
        with BuildLine():
            add(Edge.make_bspline(
                [(6.8467520485, -3.4005596444), (6.7008211488, -4.0133632838), (6.5887912239, -4.6365658048), (6.5147303328, -5.271761038)],
                knots=[31.2766934929, 31.2766934929, 31.2766934929, 31.2766934929, 33.2860399103, 33.2860399103, 33.2860399103, 33.2860399103], degree=3))
            ThreePointArc((6.8467520485, -3.4005596444), (6.8501689034, -3.2756730085), (6.8513079813, -3.1507448322))
            ThreePointArc((6.8513079813, -3.1507448322), (0.0013143327, 3.700563023), (-6.851307477, -3.1481161668))
            add(Edge.make_bspline(
                [(-6.851307477, -3.1481161668), (-6.7117079268, -3.8321186553), (-6.5985689132, -4.5391972434), (-6.5147303328, -5.271761038)],
                knots=[31.1584988533, 31.1584988533, 31.1584988533, 31.1584988533, 33.0025592871, 33.0025592871, 33.0025592871, 33.0025592871], degree=3))
            ThreePointArc((-6.5147303328, -5.271761038), (0, -10.0020528135), (6.5147303328, -5.271761038))
        make_face()
        with BuildLine():
            add(Edge.make_bspline(
                [(-22.8913266517, 23.3809179381), (-22.6566860437, 22.7580544126), (-22.3982165856, 22.1547082838), (-22.1192262656, 21.568073359)],
                knots=[0, 0, 0, 0, 1.9402705078, 1.9402705078, 1.9402705078, 1.9402705078], degree=3))
            ThreePointArc((-22.1192262656, 21.568073359), (-14.4170255201, 18.5345386269), (-9.4160658872, 25.1312523575))
            ThreePointArc((-9.4160658872, 25.1312523575), (-9.7726423449, 27.31273889), (-10.8052556607, 29.2671544041))
            ThreePointArc((-10.8052556607, 29.2671544041), (-19.2672755049, 31.2908798808), (-22.8913266517, 23.3809179381))
        make_face()
    extrude(amount=F2_DEPTH)


solid = f1.part
